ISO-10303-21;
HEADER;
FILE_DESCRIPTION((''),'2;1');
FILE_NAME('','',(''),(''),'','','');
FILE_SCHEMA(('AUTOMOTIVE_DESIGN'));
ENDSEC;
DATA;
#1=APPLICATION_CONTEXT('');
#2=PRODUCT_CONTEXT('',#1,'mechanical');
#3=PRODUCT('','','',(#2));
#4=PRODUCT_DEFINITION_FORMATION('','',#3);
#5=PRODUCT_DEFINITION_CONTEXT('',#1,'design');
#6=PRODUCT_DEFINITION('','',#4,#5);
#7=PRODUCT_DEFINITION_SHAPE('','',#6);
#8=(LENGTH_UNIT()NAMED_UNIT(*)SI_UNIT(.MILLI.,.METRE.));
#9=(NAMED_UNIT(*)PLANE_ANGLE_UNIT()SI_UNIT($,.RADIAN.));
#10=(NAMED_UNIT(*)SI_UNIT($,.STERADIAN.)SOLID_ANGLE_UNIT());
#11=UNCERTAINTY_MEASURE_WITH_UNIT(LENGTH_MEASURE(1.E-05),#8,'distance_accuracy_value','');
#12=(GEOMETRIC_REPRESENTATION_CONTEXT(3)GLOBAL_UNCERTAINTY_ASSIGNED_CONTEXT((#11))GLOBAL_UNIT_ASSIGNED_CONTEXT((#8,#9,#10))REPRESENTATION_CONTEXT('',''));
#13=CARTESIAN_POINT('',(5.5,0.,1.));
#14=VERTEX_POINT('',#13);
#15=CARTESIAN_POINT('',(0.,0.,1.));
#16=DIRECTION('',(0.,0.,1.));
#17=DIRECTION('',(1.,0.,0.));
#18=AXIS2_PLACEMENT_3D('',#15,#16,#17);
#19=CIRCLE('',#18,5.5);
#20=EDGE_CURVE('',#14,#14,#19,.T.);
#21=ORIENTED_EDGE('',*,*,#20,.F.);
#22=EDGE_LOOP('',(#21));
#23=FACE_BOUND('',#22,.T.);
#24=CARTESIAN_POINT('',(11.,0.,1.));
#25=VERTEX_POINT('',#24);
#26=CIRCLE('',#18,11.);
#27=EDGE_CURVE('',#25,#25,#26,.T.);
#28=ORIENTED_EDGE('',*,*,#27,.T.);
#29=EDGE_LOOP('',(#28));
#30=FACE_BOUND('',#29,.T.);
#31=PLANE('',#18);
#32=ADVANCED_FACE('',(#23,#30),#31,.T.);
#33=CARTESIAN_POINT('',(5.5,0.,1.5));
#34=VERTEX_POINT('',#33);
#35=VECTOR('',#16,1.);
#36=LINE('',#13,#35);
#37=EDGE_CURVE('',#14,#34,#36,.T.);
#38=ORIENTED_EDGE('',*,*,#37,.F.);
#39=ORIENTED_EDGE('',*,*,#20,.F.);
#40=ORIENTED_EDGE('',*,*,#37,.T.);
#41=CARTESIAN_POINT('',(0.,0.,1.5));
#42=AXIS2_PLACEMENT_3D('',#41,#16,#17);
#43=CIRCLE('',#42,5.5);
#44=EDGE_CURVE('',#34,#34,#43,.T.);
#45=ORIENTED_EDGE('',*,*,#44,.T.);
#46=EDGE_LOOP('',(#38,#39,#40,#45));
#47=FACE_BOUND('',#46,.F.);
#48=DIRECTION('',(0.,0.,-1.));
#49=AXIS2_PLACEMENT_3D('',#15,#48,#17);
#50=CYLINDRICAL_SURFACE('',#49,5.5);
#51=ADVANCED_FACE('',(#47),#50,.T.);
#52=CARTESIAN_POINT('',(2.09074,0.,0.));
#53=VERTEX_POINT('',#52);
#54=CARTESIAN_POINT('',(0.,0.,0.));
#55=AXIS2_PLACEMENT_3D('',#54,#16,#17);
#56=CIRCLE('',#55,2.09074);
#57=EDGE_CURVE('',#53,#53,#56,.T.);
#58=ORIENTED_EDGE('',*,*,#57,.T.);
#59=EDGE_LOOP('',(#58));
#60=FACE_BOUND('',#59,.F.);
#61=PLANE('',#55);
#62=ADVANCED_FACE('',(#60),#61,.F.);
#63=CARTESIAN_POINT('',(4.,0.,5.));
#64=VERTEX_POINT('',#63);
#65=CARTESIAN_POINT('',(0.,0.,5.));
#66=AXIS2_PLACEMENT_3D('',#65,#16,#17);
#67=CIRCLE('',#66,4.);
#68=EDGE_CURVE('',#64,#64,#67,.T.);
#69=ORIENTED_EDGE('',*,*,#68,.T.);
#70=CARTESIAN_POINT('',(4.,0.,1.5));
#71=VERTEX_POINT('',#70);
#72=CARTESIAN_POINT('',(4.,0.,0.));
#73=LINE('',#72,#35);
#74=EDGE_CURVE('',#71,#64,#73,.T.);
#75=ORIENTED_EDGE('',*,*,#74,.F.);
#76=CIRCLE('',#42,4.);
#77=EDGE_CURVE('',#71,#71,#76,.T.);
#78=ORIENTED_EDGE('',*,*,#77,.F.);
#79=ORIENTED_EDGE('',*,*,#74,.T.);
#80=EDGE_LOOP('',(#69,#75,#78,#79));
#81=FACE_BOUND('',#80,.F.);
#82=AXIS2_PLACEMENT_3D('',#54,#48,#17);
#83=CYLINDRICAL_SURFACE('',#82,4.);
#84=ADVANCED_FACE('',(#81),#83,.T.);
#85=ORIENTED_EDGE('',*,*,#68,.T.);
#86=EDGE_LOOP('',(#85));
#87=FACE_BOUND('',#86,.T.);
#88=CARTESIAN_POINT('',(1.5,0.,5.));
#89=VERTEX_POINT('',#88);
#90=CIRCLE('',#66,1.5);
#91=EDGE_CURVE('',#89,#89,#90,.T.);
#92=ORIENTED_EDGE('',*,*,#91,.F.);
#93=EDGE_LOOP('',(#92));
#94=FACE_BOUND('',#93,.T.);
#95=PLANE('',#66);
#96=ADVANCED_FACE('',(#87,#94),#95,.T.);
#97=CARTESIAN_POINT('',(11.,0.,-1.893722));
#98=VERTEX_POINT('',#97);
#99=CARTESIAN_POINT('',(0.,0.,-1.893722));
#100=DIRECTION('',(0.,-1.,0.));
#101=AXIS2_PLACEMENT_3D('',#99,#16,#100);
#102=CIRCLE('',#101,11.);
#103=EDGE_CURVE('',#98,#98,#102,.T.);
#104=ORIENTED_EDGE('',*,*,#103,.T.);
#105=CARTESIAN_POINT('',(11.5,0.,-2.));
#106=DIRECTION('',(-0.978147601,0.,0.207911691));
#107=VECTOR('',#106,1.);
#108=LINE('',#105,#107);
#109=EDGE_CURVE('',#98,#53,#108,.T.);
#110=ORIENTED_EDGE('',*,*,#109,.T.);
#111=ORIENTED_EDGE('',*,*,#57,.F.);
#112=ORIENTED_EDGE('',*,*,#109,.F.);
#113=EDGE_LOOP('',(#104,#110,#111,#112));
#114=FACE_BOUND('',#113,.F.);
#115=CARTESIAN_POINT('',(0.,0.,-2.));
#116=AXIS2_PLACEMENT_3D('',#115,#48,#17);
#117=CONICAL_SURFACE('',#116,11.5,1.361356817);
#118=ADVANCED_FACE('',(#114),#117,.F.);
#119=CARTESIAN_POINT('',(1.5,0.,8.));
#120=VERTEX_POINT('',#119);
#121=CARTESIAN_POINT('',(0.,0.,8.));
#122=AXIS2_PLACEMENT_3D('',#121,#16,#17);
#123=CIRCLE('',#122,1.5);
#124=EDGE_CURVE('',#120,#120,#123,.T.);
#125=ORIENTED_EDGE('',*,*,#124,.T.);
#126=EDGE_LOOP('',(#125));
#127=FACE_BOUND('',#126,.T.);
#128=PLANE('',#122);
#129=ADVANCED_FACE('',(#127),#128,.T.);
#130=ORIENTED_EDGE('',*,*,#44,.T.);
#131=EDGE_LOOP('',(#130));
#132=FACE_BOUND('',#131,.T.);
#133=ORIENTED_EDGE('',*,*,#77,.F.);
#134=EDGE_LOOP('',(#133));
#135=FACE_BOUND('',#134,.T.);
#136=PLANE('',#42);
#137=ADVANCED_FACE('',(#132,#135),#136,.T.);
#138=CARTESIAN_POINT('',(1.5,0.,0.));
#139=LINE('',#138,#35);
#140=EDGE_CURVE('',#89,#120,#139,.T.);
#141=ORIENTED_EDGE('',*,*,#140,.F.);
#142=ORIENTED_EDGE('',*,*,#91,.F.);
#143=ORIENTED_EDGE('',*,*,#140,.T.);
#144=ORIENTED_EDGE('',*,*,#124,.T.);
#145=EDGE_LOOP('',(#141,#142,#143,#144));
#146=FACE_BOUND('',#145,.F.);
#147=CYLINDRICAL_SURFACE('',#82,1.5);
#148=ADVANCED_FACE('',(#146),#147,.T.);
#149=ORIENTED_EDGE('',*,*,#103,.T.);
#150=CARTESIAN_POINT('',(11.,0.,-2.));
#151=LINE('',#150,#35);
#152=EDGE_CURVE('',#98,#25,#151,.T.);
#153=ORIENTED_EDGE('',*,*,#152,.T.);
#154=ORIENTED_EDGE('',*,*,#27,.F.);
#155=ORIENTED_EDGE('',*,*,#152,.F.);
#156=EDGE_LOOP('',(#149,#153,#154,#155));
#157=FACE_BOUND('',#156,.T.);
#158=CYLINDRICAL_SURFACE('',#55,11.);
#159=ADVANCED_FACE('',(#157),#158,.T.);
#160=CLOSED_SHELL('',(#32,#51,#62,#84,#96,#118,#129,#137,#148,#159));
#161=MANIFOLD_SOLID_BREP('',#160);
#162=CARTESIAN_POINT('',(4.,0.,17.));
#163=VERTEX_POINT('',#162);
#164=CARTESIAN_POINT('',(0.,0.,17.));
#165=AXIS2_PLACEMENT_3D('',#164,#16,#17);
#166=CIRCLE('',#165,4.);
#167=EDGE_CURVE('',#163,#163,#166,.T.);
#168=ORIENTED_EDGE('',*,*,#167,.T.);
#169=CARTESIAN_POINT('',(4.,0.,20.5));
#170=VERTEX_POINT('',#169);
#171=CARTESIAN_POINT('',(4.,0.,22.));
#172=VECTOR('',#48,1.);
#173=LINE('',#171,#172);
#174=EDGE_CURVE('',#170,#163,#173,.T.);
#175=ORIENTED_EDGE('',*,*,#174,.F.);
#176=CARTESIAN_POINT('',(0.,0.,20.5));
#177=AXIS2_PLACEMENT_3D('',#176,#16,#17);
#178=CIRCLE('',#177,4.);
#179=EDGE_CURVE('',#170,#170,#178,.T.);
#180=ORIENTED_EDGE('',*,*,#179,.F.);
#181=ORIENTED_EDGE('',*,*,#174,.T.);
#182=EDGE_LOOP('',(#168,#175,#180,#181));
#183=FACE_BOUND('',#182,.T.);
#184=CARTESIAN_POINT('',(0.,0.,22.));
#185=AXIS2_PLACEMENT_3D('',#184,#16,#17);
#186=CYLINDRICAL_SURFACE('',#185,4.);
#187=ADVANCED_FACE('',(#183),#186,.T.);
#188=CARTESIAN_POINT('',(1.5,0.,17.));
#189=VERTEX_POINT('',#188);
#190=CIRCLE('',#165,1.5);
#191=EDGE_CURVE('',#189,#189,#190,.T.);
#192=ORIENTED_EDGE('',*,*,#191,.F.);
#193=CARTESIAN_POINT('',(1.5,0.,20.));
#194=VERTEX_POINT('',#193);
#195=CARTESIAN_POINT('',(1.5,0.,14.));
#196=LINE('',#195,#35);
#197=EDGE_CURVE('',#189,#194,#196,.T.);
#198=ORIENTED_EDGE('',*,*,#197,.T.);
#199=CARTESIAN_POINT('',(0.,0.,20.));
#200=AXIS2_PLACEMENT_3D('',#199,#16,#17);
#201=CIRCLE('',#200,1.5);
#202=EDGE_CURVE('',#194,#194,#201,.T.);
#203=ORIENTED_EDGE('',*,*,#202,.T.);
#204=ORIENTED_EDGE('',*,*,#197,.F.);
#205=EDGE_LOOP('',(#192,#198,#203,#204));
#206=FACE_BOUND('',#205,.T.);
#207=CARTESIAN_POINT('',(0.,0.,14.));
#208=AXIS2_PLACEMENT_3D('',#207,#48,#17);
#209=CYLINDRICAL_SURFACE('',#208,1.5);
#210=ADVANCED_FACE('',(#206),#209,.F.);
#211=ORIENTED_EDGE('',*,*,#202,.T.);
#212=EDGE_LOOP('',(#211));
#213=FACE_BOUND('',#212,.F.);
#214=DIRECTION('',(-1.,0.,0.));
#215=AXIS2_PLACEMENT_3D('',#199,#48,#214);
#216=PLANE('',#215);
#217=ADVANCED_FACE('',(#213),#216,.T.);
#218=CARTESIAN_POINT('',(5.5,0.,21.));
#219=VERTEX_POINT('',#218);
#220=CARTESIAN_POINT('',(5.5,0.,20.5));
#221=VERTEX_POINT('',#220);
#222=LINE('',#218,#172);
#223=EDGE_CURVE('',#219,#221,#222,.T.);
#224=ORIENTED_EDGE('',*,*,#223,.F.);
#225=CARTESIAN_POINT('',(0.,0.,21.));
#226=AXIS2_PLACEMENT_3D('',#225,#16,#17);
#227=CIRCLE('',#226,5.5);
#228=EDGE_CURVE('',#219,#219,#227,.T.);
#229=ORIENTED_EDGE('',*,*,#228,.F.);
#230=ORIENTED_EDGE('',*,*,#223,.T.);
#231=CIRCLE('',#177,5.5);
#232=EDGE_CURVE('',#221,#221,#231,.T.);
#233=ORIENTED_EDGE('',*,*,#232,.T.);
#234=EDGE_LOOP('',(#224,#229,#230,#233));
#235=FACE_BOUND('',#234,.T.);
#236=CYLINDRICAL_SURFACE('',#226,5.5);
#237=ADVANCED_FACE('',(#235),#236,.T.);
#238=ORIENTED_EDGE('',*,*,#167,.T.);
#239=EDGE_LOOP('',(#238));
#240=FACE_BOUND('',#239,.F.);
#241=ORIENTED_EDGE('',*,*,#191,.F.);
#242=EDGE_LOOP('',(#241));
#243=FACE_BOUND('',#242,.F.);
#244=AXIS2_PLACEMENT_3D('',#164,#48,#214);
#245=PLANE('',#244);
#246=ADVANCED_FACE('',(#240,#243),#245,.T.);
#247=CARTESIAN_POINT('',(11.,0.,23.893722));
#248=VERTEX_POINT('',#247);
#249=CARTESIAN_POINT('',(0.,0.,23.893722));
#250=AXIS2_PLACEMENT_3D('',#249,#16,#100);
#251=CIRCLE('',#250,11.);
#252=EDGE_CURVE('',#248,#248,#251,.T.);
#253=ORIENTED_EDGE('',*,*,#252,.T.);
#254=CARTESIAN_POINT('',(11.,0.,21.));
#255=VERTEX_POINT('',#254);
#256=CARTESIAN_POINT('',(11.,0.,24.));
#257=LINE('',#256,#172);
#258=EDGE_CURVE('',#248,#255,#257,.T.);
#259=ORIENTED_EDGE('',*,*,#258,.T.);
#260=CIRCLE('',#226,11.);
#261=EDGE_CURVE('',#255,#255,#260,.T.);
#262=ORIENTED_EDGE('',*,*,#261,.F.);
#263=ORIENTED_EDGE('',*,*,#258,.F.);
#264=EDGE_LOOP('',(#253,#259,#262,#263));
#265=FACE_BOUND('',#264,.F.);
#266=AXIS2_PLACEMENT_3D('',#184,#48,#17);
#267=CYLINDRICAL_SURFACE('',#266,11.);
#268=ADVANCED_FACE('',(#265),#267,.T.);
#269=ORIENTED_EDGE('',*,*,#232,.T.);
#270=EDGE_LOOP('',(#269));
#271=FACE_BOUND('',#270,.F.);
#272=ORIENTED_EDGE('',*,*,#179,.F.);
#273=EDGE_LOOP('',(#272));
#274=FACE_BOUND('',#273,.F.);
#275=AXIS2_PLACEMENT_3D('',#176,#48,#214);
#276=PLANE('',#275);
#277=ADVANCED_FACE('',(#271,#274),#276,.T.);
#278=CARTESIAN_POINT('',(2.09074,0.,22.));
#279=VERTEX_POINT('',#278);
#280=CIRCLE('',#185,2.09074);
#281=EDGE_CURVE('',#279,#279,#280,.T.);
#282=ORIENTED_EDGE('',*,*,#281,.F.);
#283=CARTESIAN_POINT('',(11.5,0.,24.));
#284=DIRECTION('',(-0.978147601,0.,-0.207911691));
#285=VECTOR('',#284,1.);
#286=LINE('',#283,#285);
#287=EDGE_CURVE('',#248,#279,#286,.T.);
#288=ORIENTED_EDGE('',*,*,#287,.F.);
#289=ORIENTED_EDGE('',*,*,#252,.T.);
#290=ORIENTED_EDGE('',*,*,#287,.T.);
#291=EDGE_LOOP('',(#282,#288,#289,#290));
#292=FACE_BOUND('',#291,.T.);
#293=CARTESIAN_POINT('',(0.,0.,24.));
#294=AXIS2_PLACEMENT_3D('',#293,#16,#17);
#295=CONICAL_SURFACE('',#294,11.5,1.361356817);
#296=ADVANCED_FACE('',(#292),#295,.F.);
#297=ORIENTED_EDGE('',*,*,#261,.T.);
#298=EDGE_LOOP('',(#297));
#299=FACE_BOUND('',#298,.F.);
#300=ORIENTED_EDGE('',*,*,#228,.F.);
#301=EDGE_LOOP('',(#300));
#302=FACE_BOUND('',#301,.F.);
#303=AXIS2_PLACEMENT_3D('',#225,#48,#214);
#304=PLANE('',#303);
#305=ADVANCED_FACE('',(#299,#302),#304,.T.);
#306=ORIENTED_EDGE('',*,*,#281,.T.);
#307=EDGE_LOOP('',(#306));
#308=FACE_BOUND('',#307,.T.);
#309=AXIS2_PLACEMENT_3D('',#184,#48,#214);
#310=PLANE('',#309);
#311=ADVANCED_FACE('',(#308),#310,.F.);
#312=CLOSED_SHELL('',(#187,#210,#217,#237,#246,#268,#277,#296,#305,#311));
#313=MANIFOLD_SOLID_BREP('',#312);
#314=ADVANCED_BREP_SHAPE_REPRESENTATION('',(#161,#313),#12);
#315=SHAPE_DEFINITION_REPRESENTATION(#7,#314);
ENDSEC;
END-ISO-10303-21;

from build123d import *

# Parameters (mm, degrees)
F0_R     = 11
F0_R_2   = 5.5
F0_R_3   = 4
F0_R_4   = 1.5
F1_DEPTH = 1
F2_START = 1
F2_DEPTH = 0.5
F3_DEPTH = 5
F4_DEPTH = 8
F5_DEPTH = 2
F9_DEPTH = 6


# Not quite as in the source:
# - a fillet or chamfer that OpenCascade refuses, or shapes differently, is made with other operations: its cross-section is extruded or revolved along the edge and cut away or added


with BuildPart() as f1:
    # F0 (on Top) → F1 (new body)
    with BuildSketch(Plane.XY):
        Circle(F0_R)
        Circle(F0_R_2, mode=Mode.SUBTRACT)
        Circle(F0_R_2)
        Circle(F0_R_3, mode=Mode.SUBTRACT)
        Circle(F0_R_3)
        Circle(F0_R_4, mode=Mode.SUBTRACT)
        Circle(F0_R_4)
    extrude(amount=F1_DEPTH)

    # F0 (on Top) → F2 (join)
    with BuildSketch(Plane.XY.offset(F2_START)):
        Circle(F0_R_2)
        Circle(F0_R_3, mode=Mode.SUBTRACT)
    extrude(amount=F2_DEPTH)

    # F0 (on Top) → F3 (join)
    with BuildSketch(Plane.XY):
        Circle(F0_R_3)
        Circle(F0_R_4, mode=Mode.SUBTRACT)
    extrude(amount=F3_DEPTH)

    # F0 (on Top) → F4 (join)
    with BuildSketch(Plane.XY):
        Circle(F0_R_4)
    extrude(amount=F4_DEPTH)

    # F0 (on Top) → F5 (join)
    with BuildSketch(Plane.XY):
        Circle(F0_R)
        Circle(F0_R_2, mode=Mode.SUBTRACT)
        Circle(F0_R_2)
        Circle(F0_R_3, mode=Mode.SUBTRACT)
        Circle(F0_R_3)
        Circle(F0_R_4, mode=Mode.SUBTRACT)
    extrude(amount=-F5_DEPTH)

    # F6: chamfer of 10 x 2.1255656167 on 1 edges, made by hand


with BuildPart() as f6_tool2:
    # F6_s3 → F6_t4 (revolve)
    with BuildSketch(Plane.XZ):
        Polygon((11.5, -2), (1.5, 0.1255656167), (1.5, -2), align=None)
    revolve(axis=Axis((0, 0, -2), (0, 0, 1)))

    split(bisect_by=Plane.XY, keep=Keep.BOTTOM)


with BuildPart() as f1_1:
    add(f1.part)

    # F6_t1: cut F6_tool2
    add(f6_tool2.part, mode=Mode.SUBTRACT)


with BuildPart() as f8_1:
    # F8: instance of F1
    add(f1_1.part.mirror(Plane.XY.offset(11)))

    # F9 (cut): a face of the model
    f9_faces = [f8_1.faces().sort_by_distance(p)[0] for p in [
        (0, 0, 14),
    ]]
    extrude(f9_faces, amount=-F9_DEPTH, mode=Mode.SUBTRACT)


solid = Compound([f1_1.part, f8_1.part])
